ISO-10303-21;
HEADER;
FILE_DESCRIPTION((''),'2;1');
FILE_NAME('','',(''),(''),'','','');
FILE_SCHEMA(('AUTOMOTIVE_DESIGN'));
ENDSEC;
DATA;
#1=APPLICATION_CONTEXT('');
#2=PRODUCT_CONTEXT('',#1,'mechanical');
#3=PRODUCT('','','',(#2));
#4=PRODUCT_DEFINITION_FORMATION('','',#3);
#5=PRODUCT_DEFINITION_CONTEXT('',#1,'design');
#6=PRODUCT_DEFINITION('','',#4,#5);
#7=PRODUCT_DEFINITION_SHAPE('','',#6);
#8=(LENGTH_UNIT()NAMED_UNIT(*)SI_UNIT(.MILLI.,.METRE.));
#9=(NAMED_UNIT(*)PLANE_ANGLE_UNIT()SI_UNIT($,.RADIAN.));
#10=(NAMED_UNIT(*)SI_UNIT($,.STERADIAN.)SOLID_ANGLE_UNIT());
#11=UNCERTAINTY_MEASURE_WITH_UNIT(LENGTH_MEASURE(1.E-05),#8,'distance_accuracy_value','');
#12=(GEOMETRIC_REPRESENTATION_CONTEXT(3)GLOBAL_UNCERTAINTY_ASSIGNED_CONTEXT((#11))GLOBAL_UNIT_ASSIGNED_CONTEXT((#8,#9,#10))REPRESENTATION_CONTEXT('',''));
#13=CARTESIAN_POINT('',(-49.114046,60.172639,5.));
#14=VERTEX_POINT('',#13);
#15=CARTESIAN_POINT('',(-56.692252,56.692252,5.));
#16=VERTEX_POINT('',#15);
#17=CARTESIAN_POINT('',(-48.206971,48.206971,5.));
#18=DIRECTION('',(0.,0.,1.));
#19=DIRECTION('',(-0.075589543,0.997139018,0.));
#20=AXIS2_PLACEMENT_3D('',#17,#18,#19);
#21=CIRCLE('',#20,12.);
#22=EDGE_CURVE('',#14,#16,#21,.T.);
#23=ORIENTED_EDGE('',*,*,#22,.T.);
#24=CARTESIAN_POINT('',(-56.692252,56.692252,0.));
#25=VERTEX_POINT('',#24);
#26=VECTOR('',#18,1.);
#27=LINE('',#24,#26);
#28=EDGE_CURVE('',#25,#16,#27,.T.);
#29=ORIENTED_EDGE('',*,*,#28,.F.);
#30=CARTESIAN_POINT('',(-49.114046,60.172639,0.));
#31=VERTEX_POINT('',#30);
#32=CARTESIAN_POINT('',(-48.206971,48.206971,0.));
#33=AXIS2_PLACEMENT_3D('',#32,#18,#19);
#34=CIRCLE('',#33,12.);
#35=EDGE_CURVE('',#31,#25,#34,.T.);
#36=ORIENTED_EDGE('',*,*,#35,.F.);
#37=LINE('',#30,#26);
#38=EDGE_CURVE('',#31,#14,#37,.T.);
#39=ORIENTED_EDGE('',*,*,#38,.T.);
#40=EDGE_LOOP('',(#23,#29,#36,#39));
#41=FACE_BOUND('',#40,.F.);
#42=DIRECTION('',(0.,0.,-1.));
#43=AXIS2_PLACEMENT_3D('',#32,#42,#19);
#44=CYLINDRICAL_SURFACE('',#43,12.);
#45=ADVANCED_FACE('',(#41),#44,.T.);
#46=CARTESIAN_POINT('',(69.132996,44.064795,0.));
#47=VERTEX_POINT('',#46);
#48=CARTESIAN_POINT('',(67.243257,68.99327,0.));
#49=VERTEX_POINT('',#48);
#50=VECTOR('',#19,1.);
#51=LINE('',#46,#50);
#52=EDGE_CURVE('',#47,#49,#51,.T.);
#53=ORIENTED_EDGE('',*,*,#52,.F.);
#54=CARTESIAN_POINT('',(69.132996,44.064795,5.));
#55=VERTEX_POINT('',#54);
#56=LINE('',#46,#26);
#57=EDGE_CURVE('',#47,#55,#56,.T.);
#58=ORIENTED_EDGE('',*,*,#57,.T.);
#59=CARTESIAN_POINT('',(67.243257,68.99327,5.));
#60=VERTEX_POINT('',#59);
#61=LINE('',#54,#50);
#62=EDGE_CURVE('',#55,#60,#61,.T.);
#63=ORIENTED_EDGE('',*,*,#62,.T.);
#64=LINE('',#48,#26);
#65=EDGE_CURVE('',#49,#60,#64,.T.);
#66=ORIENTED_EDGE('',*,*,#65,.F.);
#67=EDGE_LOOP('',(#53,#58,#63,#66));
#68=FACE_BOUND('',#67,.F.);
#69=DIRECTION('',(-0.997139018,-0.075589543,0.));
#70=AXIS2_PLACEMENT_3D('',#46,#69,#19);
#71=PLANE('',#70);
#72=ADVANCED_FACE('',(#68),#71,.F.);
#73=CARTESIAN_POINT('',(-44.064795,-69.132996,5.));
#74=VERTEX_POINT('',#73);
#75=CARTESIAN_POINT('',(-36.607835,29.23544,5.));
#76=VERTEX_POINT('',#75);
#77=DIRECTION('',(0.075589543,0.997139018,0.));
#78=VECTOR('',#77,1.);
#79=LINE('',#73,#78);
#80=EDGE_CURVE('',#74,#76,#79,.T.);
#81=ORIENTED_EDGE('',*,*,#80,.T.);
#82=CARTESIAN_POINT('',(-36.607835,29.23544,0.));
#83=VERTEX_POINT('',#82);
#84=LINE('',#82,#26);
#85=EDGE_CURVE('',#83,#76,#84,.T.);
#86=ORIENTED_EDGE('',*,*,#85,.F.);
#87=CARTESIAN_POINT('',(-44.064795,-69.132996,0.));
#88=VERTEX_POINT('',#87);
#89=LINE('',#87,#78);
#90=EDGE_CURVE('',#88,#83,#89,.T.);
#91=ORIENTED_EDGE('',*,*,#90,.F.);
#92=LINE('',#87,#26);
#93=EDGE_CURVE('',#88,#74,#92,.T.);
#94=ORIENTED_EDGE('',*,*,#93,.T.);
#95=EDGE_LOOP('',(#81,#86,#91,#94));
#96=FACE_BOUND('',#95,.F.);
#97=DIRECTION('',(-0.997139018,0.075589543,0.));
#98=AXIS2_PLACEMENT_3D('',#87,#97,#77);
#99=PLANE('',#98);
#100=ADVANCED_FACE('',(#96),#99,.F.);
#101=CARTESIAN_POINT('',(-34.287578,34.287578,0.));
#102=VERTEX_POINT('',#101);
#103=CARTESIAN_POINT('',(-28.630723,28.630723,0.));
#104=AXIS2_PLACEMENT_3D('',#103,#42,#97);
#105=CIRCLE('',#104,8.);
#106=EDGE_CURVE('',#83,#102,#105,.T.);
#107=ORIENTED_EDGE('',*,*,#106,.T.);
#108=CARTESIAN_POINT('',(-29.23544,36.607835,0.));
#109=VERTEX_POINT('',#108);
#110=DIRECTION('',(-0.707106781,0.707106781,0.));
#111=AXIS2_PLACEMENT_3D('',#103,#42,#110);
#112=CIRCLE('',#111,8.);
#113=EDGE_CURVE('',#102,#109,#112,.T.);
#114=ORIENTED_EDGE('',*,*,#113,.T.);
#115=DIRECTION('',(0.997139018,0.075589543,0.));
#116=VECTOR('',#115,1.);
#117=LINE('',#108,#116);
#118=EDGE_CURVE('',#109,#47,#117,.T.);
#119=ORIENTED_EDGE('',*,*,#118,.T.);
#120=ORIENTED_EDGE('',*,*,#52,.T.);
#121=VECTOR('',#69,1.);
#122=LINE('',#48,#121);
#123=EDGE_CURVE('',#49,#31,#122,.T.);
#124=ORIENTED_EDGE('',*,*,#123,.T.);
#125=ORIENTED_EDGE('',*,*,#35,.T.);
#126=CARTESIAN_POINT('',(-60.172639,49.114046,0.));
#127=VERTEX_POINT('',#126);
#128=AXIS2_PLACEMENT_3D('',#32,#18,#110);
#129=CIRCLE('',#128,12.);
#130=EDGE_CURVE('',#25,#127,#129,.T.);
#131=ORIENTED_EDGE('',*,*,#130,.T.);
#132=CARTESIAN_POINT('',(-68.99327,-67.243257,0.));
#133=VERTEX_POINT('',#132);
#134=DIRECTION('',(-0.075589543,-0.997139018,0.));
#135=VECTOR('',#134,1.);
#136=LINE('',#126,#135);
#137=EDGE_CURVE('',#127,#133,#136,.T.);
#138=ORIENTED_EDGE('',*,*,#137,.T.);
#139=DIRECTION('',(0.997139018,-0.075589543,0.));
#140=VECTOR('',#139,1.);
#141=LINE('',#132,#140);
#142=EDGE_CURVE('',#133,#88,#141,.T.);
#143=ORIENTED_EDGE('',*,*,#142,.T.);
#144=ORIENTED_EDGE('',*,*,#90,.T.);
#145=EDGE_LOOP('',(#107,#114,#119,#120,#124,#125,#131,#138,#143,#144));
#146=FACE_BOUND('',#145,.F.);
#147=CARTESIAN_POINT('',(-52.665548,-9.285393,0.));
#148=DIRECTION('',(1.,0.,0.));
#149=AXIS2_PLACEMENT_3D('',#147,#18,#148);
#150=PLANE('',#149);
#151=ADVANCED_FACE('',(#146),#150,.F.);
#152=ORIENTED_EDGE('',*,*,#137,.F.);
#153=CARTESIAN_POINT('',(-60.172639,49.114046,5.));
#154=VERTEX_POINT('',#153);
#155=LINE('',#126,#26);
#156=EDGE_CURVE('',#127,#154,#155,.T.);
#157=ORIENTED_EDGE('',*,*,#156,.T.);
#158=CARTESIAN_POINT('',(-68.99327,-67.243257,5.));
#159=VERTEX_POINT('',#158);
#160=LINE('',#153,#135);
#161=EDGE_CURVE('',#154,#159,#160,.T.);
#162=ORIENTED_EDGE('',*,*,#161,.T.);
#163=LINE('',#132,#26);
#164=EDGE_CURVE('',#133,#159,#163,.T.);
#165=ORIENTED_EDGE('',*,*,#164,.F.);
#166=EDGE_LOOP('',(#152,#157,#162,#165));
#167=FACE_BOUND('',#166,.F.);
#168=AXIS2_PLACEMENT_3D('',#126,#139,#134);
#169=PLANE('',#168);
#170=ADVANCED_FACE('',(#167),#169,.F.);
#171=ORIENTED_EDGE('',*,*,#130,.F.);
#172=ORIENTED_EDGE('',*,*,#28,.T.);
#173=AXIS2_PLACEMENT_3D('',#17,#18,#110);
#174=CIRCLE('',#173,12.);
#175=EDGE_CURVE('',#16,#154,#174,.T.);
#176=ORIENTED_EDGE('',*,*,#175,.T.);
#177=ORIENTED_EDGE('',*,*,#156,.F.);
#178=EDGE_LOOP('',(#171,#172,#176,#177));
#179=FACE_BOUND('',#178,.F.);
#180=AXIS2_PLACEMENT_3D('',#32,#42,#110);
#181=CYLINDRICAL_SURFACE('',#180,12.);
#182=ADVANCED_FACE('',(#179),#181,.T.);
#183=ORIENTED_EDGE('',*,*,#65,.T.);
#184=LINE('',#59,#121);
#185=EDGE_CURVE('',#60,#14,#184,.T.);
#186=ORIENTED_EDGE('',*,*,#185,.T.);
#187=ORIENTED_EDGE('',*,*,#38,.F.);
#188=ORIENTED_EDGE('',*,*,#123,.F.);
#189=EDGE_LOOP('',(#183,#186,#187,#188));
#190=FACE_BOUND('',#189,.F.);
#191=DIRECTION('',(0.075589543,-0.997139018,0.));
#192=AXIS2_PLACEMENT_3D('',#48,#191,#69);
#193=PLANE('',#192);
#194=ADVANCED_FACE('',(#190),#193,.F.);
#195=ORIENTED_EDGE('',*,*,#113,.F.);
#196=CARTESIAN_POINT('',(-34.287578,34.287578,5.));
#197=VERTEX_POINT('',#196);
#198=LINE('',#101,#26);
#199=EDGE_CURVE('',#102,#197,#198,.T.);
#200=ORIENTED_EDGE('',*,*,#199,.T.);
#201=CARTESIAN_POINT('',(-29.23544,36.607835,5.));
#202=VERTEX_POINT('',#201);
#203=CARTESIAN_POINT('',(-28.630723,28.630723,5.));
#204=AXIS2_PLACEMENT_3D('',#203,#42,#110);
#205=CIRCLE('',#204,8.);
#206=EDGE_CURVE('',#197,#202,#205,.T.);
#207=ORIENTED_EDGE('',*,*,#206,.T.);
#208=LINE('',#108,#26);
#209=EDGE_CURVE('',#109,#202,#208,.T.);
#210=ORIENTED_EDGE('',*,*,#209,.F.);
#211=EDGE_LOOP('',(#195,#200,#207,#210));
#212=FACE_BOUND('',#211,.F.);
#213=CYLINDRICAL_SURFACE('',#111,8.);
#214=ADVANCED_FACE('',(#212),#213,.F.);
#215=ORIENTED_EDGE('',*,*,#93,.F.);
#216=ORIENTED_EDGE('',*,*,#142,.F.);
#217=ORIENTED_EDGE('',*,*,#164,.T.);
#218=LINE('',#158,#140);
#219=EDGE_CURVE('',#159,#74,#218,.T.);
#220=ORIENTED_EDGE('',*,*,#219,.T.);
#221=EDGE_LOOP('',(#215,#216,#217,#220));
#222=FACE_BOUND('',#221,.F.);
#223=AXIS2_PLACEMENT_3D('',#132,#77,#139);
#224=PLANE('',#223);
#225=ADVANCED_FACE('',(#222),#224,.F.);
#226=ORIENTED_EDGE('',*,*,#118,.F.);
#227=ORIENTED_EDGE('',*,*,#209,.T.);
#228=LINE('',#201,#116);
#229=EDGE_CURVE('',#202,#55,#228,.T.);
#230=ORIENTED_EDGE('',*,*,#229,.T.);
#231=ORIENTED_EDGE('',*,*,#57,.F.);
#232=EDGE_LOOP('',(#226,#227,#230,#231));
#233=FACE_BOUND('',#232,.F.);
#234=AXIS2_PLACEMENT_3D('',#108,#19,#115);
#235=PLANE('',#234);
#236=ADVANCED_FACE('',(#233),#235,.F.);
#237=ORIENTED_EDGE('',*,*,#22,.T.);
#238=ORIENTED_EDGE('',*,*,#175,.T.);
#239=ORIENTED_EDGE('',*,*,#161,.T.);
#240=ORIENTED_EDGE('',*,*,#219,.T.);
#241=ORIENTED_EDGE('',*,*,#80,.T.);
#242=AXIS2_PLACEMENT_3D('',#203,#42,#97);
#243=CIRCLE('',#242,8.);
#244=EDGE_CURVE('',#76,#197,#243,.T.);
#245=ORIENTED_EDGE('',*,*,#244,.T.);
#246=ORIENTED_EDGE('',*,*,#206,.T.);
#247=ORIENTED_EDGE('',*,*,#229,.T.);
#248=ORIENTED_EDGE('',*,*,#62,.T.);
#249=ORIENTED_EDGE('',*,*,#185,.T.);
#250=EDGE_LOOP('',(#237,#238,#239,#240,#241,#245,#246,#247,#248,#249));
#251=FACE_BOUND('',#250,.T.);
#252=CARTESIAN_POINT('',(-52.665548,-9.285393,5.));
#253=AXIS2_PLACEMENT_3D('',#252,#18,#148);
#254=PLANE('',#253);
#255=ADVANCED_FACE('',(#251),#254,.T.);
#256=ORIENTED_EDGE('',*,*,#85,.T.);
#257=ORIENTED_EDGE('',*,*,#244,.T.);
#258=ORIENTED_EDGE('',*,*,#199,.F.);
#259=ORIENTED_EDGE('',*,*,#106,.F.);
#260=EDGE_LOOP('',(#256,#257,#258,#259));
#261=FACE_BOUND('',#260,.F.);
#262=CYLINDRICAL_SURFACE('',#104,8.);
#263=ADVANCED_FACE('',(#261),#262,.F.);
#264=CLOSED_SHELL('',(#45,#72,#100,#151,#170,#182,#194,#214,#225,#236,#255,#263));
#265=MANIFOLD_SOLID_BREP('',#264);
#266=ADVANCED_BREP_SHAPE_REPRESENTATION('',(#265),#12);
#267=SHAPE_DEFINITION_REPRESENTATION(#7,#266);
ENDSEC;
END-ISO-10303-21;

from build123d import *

# Parameters (mm, degrees)
F1_DEPTH = 5
F4_DEPTH = 5


# Not quite as in the source:
# - a feature of the source that left no trace in its solid (it failed there, or was rolled back) is left out


with BuildPart() as f1:
    # F0 (on Top) → F1 (new body)
    with BuildSketch(Plane.XY):
        with BuildLine():
            Line((67.2432569916, 68.9932702117), (-49.1140455478, 60.1726392496))
            ThreePointArc((-49.1140455478, 60.1726392496), (-53.2152003045, 59.1119075124), (-56.692252409, 56.692252409))
            Line((-56.692252409, 56.692252409), (-36.0883415168, 36.0883415168))
            Line((-36.0883415168, 36.0883415168), (-34.2875776013, 34.2875776013))
            ThreePointArc((-34.2875776013, 34.2875776013), (-31.969542865, 35.9006810036), (-29.2354396938, 36.607835495))
            Line((-29.2354396938, 36.607835495), (69.1329955604, 44.0647947641))
            Line((69.1329955604, 44.0647947641), (67.2432569916, 68.9932702117))
        make_face()
    extrude(amount=F1_DEPTH)

    # F0 (on Top) → F4 (join)
    with BuildSketch(Plane.XY):
        with BuildLine():
            Line((-36.0883415168, 36.0883415168), (-56.692252409, 56.692252409))
            ThreePointArc((-56.692252409, 56.692252409), (-59.1119075124, 53.2152003045), (-60.1726392496, 49.1140455478))
            Line((-60.1726392496, 49.1140455478), (-68.9932702117, -67.2432569916))
            Line((-68.9932702117, -67.2432569916), (-44.0647947641, -69.1329955604))
            Line((-44.0647947641, -69.1329955604), (-36.607835495, 29.2354396938))
            ThreePointArc((-36.607835495, 29.2354396938), (-35.9006810036, 31.969542865), (-34.2875776013, 34.2875776013))
            Line((-34.2875776013, 34.2875776013), (-36.0883415168, 36.0883415168))
        make_face()
    extrude(amount=F4_DEPTH)


solid = f1.part
